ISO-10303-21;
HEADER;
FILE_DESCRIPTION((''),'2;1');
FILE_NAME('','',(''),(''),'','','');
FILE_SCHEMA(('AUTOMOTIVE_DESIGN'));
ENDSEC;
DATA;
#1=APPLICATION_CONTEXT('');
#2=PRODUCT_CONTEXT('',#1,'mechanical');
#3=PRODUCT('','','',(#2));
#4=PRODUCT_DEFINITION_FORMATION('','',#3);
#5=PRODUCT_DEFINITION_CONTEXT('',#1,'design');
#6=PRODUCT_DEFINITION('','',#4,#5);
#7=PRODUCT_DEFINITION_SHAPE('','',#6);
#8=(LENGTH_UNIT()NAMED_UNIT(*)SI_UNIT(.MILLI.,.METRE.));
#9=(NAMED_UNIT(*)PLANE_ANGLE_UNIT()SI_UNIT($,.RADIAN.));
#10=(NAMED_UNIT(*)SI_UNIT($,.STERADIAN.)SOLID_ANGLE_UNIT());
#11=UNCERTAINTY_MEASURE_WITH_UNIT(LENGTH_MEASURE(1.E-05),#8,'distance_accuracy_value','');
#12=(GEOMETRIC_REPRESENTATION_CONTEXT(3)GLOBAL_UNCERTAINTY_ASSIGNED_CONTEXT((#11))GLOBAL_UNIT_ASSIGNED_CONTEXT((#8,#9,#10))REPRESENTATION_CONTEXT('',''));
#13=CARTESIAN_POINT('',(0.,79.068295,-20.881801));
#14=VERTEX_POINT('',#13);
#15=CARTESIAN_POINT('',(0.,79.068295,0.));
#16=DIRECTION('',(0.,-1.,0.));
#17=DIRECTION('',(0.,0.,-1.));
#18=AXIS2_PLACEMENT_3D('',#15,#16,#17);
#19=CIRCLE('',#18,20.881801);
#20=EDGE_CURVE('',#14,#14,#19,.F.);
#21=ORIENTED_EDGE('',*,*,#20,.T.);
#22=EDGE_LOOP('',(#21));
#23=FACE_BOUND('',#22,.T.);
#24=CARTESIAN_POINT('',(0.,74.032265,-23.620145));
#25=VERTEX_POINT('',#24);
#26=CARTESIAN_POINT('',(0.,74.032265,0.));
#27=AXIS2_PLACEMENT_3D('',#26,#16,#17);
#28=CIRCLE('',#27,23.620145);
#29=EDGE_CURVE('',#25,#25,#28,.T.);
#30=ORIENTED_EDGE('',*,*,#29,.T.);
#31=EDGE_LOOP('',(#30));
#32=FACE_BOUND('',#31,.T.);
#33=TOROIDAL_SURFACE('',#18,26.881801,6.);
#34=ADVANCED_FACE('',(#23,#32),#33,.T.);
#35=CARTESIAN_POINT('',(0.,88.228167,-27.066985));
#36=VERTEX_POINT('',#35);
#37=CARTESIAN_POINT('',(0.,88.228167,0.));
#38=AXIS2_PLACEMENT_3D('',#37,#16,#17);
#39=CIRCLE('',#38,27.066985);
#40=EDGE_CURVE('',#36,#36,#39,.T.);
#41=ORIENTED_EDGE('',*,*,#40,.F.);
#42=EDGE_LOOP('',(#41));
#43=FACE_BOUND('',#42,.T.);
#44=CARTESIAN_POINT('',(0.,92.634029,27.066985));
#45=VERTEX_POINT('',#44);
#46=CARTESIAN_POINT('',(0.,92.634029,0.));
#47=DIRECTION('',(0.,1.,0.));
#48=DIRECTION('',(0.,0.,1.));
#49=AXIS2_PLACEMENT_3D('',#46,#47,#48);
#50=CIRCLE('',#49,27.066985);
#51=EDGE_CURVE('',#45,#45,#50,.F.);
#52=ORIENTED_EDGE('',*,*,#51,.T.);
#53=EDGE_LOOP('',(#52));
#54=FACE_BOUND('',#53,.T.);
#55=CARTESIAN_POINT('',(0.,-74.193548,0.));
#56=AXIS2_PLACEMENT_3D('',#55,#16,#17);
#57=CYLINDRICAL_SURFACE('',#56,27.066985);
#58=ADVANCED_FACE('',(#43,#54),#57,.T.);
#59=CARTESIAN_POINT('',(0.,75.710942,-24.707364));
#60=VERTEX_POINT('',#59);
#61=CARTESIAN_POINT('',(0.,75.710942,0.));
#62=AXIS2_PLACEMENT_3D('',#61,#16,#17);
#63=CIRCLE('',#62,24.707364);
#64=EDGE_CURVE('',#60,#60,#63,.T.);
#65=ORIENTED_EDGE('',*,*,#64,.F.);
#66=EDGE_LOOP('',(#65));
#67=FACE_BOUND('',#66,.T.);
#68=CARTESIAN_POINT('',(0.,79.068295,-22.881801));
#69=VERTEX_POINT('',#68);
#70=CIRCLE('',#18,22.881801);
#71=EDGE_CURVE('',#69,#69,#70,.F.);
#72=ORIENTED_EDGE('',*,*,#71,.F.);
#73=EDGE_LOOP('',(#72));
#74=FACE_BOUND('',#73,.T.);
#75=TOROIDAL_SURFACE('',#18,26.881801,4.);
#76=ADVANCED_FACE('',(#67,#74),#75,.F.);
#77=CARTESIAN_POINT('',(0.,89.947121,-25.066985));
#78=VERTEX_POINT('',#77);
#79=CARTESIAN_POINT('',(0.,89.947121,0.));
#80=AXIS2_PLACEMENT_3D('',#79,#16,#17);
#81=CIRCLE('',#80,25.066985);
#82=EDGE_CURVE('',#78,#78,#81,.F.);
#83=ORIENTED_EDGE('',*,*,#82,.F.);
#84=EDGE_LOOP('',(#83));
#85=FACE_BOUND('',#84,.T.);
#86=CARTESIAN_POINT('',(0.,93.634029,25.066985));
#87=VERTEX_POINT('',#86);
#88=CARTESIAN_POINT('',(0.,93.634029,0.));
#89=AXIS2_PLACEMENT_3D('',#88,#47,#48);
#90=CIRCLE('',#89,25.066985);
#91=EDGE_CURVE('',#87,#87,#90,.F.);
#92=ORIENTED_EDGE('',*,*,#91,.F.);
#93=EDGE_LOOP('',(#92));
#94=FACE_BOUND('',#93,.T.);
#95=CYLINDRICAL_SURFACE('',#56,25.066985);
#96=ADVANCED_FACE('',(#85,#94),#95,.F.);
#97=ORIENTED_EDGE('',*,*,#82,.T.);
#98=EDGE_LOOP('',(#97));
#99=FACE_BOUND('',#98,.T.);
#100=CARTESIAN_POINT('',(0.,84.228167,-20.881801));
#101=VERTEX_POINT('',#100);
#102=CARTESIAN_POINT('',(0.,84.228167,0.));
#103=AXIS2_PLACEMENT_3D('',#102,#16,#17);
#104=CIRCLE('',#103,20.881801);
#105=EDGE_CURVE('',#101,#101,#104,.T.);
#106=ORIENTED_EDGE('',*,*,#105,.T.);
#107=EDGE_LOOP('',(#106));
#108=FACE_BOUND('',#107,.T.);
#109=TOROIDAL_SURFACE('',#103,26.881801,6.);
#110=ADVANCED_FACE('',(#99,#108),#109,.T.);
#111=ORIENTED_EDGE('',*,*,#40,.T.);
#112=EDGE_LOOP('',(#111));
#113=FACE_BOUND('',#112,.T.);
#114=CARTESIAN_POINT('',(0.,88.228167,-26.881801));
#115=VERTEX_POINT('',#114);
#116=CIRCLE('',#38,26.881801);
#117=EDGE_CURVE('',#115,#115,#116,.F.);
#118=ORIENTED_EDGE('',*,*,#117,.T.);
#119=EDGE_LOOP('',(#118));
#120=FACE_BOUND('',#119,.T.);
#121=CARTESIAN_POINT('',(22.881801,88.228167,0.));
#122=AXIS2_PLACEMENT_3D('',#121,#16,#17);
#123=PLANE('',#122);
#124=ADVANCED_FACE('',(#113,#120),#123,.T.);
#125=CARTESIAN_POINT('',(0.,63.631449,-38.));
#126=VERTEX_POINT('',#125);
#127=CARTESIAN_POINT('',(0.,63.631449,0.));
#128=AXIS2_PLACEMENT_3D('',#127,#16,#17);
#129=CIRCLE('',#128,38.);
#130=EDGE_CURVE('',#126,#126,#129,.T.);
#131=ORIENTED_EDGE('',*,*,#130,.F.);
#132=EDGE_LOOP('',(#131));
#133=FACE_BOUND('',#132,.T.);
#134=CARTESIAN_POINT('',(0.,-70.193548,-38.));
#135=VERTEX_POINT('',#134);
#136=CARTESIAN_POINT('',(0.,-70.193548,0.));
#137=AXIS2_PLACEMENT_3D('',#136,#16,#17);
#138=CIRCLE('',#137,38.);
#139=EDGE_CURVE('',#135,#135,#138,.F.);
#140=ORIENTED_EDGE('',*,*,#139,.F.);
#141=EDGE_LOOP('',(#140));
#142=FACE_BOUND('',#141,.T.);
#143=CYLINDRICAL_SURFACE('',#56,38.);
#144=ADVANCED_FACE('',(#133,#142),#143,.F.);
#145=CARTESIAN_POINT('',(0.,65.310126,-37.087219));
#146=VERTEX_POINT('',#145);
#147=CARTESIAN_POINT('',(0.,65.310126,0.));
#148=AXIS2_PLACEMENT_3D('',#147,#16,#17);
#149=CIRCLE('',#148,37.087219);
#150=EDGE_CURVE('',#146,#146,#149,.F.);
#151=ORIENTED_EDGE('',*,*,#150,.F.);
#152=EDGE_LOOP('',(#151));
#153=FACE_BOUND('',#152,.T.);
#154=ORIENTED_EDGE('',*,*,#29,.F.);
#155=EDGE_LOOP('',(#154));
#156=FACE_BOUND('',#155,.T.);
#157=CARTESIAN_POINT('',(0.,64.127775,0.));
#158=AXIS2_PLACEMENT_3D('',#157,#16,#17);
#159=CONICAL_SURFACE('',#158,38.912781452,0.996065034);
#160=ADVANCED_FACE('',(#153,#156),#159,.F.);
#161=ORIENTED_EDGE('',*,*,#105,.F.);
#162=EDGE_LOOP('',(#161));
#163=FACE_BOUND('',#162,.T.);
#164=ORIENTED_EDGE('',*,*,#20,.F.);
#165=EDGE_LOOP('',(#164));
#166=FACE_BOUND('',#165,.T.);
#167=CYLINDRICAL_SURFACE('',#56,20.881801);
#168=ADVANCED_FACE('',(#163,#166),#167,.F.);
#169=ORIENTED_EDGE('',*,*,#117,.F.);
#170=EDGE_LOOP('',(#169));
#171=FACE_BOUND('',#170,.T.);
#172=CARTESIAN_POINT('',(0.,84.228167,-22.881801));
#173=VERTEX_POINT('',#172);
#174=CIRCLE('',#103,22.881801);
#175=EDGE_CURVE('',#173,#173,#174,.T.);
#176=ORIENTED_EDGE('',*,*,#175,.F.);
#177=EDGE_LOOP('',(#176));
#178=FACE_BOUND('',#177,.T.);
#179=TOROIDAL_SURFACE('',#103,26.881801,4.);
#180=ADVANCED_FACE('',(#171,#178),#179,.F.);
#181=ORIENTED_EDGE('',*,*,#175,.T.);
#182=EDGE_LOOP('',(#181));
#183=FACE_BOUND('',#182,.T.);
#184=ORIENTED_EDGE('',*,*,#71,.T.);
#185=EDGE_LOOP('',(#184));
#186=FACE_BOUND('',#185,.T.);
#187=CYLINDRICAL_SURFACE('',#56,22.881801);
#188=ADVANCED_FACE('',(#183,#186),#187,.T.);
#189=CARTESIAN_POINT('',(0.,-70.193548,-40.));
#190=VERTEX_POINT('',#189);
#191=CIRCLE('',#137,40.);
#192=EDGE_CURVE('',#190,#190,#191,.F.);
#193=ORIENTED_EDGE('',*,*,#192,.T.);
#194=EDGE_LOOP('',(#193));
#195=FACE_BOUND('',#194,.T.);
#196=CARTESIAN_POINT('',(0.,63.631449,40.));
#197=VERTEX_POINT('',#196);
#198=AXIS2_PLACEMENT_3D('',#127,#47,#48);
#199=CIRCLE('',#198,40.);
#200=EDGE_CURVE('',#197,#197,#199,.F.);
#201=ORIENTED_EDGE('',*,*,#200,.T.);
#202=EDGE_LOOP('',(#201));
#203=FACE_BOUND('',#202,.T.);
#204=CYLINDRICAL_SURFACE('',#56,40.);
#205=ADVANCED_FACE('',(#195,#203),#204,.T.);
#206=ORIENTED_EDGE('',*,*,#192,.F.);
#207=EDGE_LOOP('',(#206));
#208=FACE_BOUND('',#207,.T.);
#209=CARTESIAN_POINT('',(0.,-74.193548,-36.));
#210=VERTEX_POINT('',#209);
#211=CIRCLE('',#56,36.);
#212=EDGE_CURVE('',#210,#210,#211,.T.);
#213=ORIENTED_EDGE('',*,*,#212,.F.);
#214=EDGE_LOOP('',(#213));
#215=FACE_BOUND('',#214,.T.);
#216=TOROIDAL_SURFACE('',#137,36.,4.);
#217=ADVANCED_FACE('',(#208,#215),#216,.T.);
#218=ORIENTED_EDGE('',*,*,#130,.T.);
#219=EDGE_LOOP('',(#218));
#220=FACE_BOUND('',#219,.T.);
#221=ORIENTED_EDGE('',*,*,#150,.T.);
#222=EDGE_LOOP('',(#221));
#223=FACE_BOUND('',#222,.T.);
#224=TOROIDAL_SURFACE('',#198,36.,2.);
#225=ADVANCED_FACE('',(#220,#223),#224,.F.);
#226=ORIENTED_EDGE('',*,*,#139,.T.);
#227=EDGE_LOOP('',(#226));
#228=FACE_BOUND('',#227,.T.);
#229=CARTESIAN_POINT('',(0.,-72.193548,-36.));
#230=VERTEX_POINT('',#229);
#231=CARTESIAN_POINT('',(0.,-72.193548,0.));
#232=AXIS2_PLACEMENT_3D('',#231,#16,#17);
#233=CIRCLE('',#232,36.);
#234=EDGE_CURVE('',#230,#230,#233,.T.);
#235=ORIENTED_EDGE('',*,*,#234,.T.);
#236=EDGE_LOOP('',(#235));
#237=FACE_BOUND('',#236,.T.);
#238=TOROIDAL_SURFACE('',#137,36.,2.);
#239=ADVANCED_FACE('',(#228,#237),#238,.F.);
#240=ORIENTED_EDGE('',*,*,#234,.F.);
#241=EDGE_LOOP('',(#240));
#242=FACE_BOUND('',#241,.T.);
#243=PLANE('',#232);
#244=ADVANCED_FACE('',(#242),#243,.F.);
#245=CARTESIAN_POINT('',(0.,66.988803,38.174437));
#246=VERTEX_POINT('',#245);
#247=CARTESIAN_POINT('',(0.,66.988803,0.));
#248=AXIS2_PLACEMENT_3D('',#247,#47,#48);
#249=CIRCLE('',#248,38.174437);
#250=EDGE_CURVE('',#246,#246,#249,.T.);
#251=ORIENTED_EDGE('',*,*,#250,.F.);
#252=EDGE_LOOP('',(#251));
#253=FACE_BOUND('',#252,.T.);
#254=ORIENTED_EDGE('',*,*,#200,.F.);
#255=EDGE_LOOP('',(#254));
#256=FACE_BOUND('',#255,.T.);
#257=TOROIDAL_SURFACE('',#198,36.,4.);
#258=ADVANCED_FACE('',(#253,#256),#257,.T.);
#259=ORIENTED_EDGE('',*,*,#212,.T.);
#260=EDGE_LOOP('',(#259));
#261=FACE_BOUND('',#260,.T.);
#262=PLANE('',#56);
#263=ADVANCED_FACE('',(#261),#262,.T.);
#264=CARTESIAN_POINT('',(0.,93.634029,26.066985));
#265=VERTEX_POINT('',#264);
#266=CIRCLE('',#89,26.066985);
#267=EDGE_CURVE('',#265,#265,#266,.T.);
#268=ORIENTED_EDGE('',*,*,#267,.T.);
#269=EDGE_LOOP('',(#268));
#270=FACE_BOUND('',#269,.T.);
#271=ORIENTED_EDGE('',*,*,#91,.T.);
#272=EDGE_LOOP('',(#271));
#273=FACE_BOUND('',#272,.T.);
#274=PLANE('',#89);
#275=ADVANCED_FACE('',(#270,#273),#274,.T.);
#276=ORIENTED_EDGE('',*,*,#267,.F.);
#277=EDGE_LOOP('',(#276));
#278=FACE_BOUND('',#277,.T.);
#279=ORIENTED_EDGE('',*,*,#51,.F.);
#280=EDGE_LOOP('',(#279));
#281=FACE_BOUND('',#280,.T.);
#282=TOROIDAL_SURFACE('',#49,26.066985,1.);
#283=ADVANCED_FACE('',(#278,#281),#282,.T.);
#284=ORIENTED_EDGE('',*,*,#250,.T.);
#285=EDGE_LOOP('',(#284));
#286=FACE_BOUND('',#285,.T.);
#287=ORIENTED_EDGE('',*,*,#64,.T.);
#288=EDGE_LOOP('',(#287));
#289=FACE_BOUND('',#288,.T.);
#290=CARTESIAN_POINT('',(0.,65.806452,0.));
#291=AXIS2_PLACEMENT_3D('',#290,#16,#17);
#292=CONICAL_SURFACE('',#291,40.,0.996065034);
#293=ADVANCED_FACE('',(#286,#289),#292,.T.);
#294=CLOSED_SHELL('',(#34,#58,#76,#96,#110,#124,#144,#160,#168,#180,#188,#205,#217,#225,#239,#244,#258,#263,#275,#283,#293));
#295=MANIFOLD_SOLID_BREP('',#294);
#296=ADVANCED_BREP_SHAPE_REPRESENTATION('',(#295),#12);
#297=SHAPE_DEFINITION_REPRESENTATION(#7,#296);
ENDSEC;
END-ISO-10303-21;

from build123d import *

# Parameters (mm, degrees)
FILLET1_R = 4
FILLET2_R = 1
SHELL1_T  = 2


with BuildPart() as part:
    # Sketch5 → Revolve1 (revolve)
    with BuildSketch(Plane.XY, mode=Mode.PRIVATE) as revolve1_sk:
        Polygon((0, -74.193548387), (40, -74.193548387), (40, 65.806451613), (22.881800616, 76.893293207), (22.881800616, 88.228166712), (27.066984679, 88.228166712), (27.066984679, 93.634029461), (0, 93.634029461), align=None)
    revolve(revolve1_sk.sketch.rotate(Axis((0, -74.193548387, 0), (0, 1, 0)), 90), axis=Axis((0, -74.193548387, 0), (0, 1, 0)))

    # Fillet1
    fillet1_edges = [part.edges().sort_by_distance(p)[0] for p in [
        (0, 65.806451613, 40),
        (0, -74.193548387, 40),
        (0, 88.228166712, 22.881800616),
        (0, 76.893293207, 22.881800616),
    ]]
    fillet(fillet1_edges, radius=FILLET1_R)

    # Fillet2
    fillet2_edges = [part.edges().sort_by_distance(p)[0] for p in [
        (0, 93.634029461, 27.066984679),
    ]]
    fillet(fillet2_edges, radius=FILLET2_R)

    # Shell1
    # the kernel refuses this shell: the inside is offset whole and opened at the faces by hand
    shell1_offset = offset(amount=-SHELL1_T, mode=Mode.PRIVATE)
    shell1_offset = shell1_offset + extrude(shell1_offset.faces().sort_by_distance((0, 91.634029, 0))[0], amount=SHELL1_T, mode=Mode.PRIVATE)
    add(shell1_offset, mode=Mode.SUBTRACT)


solid = part.part
